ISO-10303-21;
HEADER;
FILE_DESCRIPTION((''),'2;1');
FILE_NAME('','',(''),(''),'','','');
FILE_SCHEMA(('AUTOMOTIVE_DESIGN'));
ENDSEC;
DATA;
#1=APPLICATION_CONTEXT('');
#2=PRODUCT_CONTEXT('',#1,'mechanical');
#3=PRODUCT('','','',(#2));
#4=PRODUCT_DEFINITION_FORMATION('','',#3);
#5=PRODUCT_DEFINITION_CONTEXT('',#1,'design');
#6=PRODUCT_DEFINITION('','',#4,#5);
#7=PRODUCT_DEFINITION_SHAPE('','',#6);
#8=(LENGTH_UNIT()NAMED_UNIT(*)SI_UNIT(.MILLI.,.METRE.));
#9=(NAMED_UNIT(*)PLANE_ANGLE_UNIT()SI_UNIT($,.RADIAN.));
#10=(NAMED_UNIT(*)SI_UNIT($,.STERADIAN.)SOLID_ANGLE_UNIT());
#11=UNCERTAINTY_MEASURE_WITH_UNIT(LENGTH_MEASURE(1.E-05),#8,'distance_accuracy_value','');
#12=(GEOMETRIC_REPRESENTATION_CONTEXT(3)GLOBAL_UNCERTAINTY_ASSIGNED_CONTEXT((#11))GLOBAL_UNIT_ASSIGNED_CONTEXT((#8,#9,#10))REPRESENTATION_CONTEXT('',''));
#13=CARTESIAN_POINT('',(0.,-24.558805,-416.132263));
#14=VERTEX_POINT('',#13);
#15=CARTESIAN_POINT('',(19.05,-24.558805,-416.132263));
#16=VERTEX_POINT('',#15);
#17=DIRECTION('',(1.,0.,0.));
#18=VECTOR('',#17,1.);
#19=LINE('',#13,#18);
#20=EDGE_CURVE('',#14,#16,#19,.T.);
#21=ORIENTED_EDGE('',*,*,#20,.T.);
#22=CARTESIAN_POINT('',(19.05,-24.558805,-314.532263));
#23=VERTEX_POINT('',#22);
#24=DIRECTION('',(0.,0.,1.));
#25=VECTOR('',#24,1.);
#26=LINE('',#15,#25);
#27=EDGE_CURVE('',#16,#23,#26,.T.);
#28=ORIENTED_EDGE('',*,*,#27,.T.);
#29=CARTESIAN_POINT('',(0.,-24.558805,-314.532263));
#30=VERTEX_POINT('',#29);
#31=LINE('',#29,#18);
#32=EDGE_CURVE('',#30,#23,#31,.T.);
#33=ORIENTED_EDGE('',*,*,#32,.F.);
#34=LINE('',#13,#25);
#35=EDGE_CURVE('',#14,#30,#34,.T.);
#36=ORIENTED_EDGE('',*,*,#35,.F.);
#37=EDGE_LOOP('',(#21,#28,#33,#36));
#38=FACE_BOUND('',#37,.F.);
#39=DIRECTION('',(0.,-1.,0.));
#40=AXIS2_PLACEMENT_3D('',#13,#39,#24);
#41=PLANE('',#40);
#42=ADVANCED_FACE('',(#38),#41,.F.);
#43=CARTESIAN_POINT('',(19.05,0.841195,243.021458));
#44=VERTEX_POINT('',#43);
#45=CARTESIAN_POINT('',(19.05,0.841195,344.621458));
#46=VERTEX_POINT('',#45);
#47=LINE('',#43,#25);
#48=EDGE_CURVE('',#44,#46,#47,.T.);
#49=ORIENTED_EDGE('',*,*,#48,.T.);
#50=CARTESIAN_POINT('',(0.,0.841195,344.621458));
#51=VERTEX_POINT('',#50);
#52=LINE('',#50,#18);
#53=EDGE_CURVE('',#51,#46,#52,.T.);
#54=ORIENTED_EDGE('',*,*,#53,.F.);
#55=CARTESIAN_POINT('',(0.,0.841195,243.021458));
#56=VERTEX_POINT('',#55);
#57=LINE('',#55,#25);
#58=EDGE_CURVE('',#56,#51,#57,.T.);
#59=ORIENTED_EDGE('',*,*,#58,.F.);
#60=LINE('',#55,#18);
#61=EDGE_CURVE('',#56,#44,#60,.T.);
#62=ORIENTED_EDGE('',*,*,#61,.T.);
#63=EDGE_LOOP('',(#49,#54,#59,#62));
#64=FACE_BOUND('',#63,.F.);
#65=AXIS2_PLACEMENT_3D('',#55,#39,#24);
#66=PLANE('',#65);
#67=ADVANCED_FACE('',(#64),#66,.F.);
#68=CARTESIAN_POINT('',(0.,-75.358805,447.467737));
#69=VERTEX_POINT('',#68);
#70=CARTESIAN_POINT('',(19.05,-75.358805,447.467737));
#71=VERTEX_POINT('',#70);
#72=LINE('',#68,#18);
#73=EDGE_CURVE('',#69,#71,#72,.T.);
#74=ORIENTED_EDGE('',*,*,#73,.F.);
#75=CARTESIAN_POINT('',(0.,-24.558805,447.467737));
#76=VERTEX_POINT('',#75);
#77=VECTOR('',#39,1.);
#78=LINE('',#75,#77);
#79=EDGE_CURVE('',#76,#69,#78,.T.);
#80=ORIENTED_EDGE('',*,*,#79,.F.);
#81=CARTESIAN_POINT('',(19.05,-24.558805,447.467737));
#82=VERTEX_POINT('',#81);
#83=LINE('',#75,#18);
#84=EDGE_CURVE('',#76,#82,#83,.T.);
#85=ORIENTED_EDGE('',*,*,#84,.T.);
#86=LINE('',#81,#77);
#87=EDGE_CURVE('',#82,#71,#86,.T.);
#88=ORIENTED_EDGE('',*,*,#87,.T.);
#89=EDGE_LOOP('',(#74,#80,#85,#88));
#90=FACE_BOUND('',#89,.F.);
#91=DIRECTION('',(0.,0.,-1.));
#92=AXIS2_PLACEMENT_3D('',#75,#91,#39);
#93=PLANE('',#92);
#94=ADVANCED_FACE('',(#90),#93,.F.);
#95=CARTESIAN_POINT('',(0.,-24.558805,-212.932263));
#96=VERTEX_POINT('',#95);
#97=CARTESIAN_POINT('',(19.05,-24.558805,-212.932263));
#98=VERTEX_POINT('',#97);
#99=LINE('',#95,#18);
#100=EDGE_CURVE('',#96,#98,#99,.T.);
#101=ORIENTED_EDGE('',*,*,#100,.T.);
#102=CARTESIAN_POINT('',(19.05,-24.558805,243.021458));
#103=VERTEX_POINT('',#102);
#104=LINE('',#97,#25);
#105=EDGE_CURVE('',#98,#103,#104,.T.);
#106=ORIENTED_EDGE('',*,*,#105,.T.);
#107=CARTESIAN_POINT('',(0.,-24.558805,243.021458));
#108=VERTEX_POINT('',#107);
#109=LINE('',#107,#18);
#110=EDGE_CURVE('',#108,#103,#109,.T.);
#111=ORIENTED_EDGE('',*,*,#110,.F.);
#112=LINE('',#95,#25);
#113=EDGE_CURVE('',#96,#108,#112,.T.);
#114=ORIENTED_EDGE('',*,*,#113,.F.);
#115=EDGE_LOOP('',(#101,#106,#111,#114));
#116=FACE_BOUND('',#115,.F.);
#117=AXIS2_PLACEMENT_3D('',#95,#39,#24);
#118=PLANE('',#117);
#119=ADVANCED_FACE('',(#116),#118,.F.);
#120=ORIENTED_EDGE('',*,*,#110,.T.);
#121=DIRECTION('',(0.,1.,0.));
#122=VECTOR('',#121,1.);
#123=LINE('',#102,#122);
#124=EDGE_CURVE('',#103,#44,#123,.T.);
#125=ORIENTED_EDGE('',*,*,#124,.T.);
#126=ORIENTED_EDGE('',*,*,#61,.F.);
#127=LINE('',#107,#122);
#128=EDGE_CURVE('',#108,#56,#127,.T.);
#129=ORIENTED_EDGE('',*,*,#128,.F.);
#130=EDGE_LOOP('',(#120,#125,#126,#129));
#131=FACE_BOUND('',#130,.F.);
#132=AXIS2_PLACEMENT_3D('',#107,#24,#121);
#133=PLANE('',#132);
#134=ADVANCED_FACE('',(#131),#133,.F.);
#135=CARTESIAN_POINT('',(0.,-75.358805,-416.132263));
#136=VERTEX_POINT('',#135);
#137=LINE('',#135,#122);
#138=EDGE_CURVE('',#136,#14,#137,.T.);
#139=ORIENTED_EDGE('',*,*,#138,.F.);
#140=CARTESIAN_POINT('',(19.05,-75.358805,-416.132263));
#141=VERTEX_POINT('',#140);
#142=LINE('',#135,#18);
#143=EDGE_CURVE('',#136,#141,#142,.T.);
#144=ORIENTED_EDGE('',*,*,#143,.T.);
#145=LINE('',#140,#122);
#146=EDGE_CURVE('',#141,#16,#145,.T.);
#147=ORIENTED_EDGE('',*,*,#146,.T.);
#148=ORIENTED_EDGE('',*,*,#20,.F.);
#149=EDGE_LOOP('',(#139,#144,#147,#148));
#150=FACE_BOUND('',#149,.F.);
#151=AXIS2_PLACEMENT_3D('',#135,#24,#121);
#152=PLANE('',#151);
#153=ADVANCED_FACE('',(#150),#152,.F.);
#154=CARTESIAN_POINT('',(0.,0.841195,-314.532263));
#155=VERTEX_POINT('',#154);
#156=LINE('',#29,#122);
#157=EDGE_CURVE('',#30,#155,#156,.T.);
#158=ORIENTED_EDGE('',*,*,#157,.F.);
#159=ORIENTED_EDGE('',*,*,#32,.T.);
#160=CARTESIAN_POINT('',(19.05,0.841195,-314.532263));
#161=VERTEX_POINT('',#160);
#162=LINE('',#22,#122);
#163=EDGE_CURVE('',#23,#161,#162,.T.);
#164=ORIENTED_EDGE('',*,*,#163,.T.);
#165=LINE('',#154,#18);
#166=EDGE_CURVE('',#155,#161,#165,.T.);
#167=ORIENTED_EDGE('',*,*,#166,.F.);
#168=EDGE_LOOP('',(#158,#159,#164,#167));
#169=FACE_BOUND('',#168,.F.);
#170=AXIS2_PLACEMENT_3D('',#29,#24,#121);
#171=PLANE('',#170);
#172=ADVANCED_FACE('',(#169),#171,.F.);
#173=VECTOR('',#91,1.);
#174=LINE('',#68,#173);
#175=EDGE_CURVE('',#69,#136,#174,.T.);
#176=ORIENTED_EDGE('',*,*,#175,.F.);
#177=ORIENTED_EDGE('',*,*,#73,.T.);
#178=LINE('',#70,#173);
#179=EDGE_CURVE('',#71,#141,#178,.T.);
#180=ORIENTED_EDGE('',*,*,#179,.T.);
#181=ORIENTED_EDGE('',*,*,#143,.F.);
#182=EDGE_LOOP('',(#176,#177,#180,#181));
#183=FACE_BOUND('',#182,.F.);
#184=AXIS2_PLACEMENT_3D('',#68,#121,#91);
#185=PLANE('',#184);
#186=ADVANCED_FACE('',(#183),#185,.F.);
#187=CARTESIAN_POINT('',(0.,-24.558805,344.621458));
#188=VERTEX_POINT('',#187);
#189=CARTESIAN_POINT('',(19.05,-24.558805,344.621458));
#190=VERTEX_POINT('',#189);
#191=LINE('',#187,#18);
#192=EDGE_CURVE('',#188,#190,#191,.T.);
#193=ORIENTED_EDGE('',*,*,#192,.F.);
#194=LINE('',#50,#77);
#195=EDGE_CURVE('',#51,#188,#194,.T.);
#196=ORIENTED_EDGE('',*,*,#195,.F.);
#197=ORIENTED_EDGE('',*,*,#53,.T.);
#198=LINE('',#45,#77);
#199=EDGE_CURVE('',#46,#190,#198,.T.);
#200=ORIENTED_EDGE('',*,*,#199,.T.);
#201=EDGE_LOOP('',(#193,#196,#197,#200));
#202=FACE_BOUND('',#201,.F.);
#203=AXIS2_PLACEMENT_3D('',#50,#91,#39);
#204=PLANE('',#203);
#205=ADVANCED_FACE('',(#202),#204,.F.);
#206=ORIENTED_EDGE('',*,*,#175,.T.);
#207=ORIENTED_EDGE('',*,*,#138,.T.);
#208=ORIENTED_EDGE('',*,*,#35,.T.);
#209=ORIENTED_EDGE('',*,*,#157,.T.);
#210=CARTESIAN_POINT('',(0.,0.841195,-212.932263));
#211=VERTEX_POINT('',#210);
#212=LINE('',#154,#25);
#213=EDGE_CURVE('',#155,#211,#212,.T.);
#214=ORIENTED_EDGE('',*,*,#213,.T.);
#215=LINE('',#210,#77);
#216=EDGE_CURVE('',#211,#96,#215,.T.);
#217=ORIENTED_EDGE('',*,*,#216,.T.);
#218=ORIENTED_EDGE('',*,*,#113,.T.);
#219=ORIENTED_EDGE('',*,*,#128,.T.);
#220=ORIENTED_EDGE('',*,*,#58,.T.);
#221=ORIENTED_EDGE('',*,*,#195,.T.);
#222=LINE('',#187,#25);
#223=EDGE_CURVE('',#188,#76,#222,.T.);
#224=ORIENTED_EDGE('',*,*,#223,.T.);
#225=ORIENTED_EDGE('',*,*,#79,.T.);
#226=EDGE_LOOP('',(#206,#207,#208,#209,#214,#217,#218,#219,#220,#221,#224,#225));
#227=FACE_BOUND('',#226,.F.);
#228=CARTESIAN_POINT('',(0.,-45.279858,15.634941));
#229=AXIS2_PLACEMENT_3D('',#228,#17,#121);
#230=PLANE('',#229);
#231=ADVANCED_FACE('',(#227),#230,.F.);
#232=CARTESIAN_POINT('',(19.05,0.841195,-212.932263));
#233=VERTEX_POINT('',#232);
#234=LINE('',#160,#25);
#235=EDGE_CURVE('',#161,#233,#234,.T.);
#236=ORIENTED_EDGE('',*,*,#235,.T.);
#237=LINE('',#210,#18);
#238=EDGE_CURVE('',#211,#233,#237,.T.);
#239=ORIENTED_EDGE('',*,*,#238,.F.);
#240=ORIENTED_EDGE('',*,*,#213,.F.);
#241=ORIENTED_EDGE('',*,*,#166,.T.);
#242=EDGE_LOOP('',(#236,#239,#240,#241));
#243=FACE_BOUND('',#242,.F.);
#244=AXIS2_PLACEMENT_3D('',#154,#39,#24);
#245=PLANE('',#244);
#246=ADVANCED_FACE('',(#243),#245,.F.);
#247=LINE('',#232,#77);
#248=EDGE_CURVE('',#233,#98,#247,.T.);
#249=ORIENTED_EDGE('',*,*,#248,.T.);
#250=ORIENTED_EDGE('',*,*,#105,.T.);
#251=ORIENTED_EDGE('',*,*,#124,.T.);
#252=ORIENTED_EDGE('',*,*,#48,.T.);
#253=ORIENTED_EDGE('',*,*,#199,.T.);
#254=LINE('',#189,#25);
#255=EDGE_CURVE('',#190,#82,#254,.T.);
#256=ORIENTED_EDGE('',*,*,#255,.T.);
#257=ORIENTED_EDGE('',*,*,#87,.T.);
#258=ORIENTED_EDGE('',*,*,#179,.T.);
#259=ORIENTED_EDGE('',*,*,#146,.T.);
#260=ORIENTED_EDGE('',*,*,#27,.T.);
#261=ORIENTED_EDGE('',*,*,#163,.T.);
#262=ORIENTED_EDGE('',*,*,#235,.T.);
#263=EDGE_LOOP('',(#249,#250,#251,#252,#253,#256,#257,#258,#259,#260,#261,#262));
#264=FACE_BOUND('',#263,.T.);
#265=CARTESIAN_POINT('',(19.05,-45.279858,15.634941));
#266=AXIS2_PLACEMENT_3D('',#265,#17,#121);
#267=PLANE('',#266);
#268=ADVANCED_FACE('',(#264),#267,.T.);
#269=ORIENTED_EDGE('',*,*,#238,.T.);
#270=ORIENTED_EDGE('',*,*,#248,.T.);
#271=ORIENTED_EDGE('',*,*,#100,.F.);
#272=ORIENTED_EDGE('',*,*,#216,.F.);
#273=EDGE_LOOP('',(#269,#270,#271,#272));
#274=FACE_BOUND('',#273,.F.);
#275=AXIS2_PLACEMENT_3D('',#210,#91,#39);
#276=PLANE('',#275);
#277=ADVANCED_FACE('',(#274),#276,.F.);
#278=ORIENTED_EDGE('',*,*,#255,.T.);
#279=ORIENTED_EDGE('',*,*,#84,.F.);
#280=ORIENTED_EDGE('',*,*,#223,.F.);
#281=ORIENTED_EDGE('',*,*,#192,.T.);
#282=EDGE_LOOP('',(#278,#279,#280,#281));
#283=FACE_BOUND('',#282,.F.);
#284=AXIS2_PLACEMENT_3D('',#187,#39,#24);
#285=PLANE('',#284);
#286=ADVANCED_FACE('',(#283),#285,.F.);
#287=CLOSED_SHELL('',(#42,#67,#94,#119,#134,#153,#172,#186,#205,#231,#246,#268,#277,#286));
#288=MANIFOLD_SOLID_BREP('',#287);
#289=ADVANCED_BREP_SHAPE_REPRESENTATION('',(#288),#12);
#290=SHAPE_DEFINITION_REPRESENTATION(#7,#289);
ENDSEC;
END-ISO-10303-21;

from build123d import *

# Parameters (mm, degrees)
F1_DEPTH = 19.05


# Not quite as in the source:
# - a length typed as a fraction of an inch, garbled in the dataset ("3 / 203.2 mm" for 3/8 in), is restored


with BuildPart() as f1:
    # F0 (on Right) → F1 (new body)
    with BuildSketch(Plane.YZ):
        Polygon((-24.5588049293, 447.4677373628), (-75.3588049293, 447.4677373628), (-75.3588049293, -416.1322626372), (-24.5588049293, -416.1322626372), (-24.5588049293, -314.5322626372), (0.8411950707, -314.5322626372), (0.8411950707, -212.9322626372), (-24.5588049293, -212.9322626372), (-24.5588049293, 243.0214576224), (0.8411950707, 243.0214576224), (0.8411950707, 344.6214576224), (-24.5588049293, 344.6214576224), align=None)
    extrude(amount=F1_DEPTH)


solid = f1.part
